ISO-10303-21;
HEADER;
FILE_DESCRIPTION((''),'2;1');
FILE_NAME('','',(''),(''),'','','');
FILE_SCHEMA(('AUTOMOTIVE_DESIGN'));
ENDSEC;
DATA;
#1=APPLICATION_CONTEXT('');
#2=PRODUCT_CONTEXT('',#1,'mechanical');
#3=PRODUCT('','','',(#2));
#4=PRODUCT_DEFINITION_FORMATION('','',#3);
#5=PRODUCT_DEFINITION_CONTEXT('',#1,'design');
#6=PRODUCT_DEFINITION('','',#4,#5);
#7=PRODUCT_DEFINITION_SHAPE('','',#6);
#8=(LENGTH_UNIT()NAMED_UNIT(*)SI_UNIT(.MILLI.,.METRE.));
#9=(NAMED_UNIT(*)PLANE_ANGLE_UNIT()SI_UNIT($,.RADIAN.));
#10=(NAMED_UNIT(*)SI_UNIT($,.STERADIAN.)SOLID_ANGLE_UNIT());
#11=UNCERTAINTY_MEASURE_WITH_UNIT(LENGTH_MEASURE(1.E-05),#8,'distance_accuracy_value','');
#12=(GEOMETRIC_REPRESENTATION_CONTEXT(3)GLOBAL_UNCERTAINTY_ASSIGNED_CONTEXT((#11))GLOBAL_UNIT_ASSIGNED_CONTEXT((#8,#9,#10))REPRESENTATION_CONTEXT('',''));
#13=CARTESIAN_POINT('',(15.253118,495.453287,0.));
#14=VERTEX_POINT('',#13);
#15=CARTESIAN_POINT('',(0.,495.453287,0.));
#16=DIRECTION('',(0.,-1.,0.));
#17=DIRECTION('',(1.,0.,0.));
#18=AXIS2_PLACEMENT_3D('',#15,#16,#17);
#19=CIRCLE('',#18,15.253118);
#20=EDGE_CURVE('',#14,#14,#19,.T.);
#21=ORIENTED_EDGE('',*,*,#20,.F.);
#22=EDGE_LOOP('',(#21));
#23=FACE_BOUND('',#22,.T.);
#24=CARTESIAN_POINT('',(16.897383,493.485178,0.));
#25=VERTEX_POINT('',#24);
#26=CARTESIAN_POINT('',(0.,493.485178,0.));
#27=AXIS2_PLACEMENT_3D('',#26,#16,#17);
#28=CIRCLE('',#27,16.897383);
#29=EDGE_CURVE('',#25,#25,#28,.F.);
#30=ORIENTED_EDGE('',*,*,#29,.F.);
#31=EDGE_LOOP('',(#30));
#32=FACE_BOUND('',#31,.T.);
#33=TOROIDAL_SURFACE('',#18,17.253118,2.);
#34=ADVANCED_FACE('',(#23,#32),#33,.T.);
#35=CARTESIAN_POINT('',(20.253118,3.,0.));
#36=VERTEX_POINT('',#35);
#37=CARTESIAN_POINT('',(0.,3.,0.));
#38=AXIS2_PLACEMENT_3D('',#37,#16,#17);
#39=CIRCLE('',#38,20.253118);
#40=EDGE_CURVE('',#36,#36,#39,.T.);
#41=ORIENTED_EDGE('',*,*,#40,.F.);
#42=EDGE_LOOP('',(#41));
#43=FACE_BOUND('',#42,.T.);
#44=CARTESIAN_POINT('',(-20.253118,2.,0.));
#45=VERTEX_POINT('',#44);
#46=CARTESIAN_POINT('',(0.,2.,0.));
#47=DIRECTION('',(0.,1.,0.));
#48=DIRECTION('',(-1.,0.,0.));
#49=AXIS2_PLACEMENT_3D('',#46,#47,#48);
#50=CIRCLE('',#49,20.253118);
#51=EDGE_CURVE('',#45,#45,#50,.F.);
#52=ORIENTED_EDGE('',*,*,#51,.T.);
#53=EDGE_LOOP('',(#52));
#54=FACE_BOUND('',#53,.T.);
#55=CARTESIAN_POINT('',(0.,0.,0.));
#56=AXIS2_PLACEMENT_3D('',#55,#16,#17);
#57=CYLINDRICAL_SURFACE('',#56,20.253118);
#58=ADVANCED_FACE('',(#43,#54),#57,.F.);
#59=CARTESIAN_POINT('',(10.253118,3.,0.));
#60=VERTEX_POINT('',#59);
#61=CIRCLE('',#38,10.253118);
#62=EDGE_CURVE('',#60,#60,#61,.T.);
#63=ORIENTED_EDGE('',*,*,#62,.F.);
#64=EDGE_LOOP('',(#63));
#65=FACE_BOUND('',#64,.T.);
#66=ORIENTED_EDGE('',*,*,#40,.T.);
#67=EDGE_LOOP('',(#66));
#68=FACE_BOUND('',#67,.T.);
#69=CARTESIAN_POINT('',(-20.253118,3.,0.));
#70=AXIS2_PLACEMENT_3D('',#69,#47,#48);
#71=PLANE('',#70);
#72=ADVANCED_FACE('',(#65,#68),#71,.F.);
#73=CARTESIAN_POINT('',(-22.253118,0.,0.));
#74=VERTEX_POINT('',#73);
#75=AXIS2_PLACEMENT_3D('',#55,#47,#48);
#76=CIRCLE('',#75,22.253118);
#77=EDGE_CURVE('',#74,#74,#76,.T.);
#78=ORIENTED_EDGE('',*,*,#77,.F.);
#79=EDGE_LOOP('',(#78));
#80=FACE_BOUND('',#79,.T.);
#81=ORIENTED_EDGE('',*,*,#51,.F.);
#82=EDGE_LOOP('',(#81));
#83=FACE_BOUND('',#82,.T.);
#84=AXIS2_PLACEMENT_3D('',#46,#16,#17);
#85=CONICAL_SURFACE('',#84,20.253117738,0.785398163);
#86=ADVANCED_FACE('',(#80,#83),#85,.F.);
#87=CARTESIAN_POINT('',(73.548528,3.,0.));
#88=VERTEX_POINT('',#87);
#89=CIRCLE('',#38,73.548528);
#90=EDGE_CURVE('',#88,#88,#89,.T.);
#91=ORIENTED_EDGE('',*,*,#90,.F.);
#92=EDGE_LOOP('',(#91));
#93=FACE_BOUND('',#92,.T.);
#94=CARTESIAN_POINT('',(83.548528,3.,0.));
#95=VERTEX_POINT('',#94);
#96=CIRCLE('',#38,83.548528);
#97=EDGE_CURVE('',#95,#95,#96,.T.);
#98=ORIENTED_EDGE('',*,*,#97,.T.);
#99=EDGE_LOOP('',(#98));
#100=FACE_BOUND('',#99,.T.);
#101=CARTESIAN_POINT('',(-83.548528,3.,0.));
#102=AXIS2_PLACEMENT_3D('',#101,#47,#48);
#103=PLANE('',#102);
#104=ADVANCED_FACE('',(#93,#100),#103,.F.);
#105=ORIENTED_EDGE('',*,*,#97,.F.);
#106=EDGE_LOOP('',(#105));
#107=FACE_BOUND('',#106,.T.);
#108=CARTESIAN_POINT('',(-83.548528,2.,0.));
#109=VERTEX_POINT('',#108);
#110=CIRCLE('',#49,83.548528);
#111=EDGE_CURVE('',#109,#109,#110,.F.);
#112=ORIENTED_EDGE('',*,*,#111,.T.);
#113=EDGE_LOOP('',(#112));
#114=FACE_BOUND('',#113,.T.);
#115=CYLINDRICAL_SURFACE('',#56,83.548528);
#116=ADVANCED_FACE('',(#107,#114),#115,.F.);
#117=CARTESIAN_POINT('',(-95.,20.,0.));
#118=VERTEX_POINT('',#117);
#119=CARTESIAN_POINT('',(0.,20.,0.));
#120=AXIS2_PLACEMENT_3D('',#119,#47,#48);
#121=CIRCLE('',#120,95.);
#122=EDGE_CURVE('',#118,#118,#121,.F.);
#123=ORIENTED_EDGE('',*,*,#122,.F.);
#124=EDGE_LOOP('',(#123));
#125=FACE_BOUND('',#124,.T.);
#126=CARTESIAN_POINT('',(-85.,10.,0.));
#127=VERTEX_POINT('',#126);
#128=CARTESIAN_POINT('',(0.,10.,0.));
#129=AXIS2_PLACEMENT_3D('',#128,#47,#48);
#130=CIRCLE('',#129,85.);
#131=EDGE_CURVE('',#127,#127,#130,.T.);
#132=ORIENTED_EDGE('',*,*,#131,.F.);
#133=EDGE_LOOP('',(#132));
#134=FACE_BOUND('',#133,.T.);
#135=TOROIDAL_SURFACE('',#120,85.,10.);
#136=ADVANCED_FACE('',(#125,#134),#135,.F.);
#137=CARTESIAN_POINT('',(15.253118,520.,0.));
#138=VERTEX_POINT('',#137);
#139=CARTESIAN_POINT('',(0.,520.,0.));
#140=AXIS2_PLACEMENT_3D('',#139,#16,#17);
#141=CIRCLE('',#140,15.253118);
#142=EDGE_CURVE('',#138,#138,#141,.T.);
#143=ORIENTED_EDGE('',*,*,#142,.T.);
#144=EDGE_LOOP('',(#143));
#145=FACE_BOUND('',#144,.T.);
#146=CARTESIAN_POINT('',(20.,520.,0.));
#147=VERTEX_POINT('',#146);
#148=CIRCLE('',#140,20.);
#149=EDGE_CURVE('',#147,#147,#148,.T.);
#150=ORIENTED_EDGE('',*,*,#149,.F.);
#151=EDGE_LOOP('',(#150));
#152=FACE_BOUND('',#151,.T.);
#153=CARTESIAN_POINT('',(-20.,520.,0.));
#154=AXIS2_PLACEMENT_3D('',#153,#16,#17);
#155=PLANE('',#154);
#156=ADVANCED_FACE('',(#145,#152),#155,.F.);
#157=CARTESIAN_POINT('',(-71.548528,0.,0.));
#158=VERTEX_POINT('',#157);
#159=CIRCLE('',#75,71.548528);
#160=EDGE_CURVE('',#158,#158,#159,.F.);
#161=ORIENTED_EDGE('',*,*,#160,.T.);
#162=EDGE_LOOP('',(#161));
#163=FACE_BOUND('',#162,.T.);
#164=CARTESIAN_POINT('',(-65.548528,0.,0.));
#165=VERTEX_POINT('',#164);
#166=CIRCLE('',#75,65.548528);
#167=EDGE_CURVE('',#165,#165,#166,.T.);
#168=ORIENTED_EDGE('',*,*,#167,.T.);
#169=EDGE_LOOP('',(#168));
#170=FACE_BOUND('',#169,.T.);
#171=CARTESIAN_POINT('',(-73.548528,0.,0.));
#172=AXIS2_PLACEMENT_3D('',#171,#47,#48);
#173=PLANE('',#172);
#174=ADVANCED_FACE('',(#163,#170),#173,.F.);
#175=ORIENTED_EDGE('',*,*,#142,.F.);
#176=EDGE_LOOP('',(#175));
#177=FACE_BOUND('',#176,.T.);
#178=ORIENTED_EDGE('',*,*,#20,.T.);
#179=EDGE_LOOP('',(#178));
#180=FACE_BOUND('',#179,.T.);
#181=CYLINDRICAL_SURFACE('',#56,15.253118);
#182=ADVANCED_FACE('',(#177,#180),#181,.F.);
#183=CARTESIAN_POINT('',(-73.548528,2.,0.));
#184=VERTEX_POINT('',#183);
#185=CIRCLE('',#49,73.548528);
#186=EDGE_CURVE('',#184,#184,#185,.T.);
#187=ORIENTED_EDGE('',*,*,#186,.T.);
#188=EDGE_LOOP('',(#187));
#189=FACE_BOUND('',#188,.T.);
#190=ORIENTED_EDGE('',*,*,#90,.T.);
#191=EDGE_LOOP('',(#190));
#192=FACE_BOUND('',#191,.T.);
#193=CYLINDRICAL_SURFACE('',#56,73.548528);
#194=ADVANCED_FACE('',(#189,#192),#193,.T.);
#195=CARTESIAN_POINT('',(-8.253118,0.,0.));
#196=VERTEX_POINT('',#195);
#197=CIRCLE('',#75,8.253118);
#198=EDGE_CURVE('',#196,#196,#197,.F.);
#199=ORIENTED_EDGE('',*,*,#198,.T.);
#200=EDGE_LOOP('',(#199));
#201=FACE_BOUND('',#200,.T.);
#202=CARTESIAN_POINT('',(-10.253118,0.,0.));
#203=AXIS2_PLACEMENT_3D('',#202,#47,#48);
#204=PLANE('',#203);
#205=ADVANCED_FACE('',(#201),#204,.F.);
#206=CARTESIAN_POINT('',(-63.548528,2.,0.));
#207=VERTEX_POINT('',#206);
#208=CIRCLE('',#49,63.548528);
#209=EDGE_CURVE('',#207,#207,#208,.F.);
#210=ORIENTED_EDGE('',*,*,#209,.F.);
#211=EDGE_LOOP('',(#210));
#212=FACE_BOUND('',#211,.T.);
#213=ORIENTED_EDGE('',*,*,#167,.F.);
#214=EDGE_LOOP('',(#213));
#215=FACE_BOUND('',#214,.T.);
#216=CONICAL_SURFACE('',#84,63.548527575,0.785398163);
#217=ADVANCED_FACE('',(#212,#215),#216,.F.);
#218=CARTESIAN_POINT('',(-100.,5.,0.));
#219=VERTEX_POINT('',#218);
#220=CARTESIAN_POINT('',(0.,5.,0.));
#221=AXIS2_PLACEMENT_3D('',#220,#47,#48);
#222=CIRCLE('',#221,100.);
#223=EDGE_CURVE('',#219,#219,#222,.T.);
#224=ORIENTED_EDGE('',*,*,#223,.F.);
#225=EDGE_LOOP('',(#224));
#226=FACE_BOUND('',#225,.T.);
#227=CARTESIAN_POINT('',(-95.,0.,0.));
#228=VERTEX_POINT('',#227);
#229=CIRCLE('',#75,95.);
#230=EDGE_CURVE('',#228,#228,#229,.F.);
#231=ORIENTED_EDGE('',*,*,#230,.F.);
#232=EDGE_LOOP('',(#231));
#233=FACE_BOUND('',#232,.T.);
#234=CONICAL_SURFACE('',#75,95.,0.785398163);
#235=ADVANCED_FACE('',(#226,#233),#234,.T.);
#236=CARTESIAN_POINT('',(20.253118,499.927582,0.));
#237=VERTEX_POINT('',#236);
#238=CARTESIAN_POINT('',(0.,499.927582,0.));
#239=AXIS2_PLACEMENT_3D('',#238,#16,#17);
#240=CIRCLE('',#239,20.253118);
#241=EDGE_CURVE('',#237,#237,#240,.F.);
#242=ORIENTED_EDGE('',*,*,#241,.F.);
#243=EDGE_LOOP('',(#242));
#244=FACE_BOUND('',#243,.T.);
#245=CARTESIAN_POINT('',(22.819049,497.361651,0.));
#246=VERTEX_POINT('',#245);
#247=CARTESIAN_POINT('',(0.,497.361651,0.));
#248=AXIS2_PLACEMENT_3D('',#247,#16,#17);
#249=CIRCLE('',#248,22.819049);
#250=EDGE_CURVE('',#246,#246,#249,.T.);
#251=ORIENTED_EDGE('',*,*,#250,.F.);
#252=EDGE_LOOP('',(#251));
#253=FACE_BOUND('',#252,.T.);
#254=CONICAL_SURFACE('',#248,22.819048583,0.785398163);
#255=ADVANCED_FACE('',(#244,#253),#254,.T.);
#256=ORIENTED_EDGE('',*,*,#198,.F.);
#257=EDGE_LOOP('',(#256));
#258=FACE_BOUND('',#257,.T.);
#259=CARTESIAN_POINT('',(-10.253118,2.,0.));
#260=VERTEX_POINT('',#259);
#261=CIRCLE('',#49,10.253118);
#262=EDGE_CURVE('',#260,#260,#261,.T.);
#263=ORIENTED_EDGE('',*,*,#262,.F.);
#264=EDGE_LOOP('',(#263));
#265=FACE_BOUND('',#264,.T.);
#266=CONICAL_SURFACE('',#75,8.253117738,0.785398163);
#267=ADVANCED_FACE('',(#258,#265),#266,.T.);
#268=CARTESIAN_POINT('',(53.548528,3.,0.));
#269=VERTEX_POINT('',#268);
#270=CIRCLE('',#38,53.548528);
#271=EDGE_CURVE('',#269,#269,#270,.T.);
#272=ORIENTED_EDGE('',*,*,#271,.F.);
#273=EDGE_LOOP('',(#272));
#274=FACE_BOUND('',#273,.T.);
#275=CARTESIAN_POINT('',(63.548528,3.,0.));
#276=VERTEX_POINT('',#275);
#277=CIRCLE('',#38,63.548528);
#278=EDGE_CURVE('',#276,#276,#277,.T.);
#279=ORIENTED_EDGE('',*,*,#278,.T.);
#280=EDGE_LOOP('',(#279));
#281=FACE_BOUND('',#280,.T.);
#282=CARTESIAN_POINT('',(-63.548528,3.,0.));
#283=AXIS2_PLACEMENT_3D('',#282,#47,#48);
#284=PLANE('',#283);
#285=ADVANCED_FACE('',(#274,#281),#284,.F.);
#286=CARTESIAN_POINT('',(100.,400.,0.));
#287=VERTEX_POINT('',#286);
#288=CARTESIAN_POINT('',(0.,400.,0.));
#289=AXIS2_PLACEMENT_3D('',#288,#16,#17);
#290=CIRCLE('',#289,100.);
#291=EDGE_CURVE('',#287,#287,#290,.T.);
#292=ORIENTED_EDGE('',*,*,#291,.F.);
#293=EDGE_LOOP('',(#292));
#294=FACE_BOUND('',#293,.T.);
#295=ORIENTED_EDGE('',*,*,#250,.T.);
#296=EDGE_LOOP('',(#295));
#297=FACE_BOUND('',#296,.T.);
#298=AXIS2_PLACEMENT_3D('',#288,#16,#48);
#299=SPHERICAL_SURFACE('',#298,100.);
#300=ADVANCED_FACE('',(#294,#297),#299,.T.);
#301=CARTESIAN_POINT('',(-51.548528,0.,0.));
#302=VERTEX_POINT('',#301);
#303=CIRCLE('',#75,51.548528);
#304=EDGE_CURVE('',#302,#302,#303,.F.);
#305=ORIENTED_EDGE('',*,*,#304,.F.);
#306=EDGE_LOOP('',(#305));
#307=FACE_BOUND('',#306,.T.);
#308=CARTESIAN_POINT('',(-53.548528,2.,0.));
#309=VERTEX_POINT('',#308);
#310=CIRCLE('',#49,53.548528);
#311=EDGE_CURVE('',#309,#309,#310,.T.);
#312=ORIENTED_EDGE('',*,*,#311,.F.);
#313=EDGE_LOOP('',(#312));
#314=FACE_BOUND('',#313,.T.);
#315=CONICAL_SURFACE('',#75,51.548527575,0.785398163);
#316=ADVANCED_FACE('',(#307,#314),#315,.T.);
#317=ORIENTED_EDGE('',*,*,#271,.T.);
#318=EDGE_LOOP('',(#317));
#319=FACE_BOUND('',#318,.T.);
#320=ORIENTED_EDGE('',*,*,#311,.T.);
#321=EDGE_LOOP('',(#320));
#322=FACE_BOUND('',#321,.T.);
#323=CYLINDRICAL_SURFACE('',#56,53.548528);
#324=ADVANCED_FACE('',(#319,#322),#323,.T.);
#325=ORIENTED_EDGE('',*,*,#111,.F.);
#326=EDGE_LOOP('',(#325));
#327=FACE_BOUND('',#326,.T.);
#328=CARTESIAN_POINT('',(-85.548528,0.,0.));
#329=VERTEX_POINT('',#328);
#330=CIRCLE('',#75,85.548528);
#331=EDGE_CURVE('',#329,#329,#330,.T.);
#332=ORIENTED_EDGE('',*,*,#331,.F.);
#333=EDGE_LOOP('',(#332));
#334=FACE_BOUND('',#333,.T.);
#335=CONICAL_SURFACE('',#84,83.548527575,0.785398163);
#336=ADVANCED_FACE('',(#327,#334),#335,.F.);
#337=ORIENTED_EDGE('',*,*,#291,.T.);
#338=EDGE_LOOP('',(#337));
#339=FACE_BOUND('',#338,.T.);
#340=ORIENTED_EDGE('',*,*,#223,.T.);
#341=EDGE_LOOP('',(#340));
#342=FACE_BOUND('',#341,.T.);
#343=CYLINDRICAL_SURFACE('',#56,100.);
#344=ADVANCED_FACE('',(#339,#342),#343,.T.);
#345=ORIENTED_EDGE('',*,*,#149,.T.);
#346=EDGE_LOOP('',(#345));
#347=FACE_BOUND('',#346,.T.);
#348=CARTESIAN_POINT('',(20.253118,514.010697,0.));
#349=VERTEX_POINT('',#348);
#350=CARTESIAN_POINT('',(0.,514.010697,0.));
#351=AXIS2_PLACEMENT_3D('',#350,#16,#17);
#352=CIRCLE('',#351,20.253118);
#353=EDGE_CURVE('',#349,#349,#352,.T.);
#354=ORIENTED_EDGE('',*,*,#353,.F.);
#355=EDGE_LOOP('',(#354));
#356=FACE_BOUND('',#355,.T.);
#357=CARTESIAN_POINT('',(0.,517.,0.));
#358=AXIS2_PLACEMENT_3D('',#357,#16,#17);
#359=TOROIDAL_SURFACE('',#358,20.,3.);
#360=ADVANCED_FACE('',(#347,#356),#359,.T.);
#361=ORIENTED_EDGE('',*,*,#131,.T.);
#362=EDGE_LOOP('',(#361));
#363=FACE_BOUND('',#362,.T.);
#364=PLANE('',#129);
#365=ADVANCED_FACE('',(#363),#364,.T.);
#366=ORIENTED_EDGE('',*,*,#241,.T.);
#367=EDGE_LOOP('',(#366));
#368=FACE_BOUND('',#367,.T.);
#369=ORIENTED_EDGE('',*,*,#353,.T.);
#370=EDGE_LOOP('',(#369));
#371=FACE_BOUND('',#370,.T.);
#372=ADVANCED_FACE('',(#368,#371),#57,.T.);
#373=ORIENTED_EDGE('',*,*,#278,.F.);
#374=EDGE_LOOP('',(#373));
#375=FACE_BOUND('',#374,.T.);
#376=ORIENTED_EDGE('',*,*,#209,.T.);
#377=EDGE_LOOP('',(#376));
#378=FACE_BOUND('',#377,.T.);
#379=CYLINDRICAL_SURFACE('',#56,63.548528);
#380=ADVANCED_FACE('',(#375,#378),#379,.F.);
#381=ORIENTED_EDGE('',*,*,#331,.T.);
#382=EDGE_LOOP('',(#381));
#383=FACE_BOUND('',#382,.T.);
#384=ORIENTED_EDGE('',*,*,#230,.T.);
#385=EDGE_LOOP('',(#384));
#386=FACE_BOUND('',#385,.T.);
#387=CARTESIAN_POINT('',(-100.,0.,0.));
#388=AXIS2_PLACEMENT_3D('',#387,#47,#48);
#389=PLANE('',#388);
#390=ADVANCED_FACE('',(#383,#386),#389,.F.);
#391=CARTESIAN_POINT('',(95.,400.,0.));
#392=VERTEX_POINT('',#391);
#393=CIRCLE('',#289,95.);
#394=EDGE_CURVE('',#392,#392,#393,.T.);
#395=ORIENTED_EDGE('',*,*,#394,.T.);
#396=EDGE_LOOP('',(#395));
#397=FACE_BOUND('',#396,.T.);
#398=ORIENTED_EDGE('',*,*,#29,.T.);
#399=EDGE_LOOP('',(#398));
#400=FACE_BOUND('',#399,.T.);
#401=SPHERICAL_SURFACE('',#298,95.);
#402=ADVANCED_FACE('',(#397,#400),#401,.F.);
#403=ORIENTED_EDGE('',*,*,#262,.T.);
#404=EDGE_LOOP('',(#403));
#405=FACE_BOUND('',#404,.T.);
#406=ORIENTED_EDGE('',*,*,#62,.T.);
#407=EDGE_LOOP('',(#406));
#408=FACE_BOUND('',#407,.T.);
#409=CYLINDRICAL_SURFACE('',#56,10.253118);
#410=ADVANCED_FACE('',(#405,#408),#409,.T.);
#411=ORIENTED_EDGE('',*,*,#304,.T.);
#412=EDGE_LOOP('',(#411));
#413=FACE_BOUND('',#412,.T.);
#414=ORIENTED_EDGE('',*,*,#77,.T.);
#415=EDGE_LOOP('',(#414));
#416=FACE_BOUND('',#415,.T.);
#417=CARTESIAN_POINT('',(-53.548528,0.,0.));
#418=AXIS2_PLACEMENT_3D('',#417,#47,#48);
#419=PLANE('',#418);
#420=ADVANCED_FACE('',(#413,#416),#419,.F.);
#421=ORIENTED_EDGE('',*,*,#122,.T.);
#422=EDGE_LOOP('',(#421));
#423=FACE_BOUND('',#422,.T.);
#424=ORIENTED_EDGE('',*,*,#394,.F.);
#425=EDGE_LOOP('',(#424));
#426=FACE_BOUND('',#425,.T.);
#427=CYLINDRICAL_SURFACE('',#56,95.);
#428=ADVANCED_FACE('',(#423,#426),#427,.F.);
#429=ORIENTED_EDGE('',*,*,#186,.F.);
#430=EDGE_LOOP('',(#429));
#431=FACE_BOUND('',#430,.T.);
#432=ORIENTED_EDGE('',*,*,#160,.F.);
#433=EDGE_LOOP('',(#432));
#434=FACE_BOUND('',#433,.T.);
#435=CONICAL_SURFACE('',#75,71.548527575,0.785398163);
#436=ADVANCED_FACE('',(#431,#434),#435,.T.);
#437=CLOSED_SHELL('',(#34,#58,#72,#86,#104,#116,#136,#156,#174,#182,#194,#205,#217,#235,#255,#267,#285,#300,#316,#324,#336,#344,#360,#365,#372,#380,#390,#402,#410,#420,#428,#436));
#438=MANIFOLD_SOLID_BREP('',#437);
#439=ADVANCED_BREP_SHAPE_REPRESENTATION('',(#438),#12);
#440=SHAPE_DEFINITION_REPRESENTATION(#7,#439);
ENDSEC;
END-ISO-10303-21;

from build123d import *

# Parameters (mm, degrees)
CHANFREIN1_SIZE    = 0.2
CHANFREIN2_SIZE    = 0.5
CHANFREIN3_SIZE    = 0.2
ESQUISSE2_R        = 10
BOSS_EXTRU_1_DEPTH = 0.5
CONG_1_R           = 1
CONG_2_R           = 0.2
ECHELLE1_SCALE     = 10


with BuildPart() as part:
    # Esquisse1 → Révolution1 (revolve)
    with BuildSketch(Plane.XY, mode=Mode.PRIVATE) as r_volution1_sk:
        with BuildLine():
            Line((0, 0), (0, 50))
            Line((0, 50), (0, 52))
            Line((0, 52), (-2, 52))
            ThreePointArc((-2, 52), (-2.299732451, 51.712667184), (-2.025311774, 51.401069717))
            Line((-2.025311774, 51.401069717), (-2.025311774, 49.792758152))
            ThreePointArc((-2.025311774, 49.792758152), (-7.754131729, 46.314542037), (-10, 40))
            Line((-10, 40), (-10, 0))
            Line((-10, 0), (-8.354852758, 0))
            Line((-8.354852758, 0), (-8.354852758, 0.3))
            Line((-8.354852758, 0.3), (-7.354852758, 0.3))
            Line((-7.354852758, 0.3), (-7.354852758, 0))
            Line((-7.354852758, 0), (-6.354852758, 0))
            Line((-6.354852758, 0), (-6.354852758, 0.3))
            Line((-6.354852758, 0.3), (-5.354852758, 0.3))
            Line((-5.354852758, 0.3), (-5.354852758, 0))
            Line((-5.354852758, 0), (-2.025311774, 0))
            Line((-2.025311774, 0), (-2.025311774, 0.3))
            Line((-2.025311774, 0.3), (-1.025311774, 0.3))
            Line((-1.025311774, 0.3), (-1.025311774, 0))
            Line((-1.025311774, 0), (0, 0))
        make_face()
    revolve(r_volution1_sk.sketch.rotate(Axis((0, 0, 0), (0, 1, 0)), 180), axis=Axis((0, 0, 0), (0, 1, 0)))

    # Chanfrein1
    chanfrein1_edges = [part.edges().sort_by_distance(p)[0] for p in [
        (-1.025311774, 0, 0),
        (-2.025311774, 0, 0),
        (-5.354852758, 0, 0),
        (-6.354852758, 0, 0),
        (-7.354852758, 0, 0),
        (-8.354852758, 0, 0),
    ]]
    chamfer(chanfrein1_edges, length=CHANFREIN1_SIZE)

    # Chanfrein2
    chanfrein2_edges = [part.edges().sort_by_distance(p)[0] for p in [
        (-10, 0, 0),
    ]]
    chamfer(chanfrein2_edges, length=CHANFREIN2_SIZE)

    # Coque2: read off the stored shape, not the designer's step
    # Coque2 outline → Coque2 (revolve, cut)
    with BuildSketch(Plane.XY):
        with BuildLine():
            Line((8.854852758, 0.8), (8.854852758, 0.5))
            Line((8.854852758, 0.5), (9.292893219, 0.5))
            Line((9.292893219, 0.5), (9.5, 0.707106781))
            Line((9.5, 0.707106781), (9.5, 39.999999997))
            ThreePointArc((9.5, 39.999999997), (7.236727916, 46.154654261), (1.525311771, 49.376749117))
            Line((1.525311771, 49.376749117), (1.525311774, 52))
            Line((1.525311774, 52), (0, 52))
            Line((0, 52), (0, 0.5))
            Line((0, 0.5), (0.525311774, 0.5))
            Line((0.525311774, 0.5), (0.525311774, 0.8))
            Line((0.525311774, 0.8), (2.525311774, 0.8))
            Line((2.525311774, 0.8), (2.525311774, 0.5))
            Line((2.525311774, 0.5), (4.854852758, 0.5))
            Line((4.854852758, 0.5), (4.854852758, 0.8))
            Line((4.854852758, 0.8), (8.854852758, 0.8))
        make_face()
    revolve(axis=Axis((0, 0, 0), (0, 1, 0)), mode=Mode.SUBTRACT)

    # Chanfrein3
    # the kernel refuses this chamfer: 0.25748488, 0.2 mm, written as the material it adds along each edge
    with BuildSketch(Plane(origin=(0, 49.792758152, 0), x_dir=(1, 0, 0), z_dir=(0, 0, 1))) as chanfrein3_piece_1:
        with BuildLine():
            Line((2.281904858, -0.056593084), (2.025311774, CHANFREIN3_SIZE))
            Line((2.025311774, CHANFREIN3_SIZE), (2.025311774, 0))
            ThreePointArc((2.025311774, 0), (2.158033883, -0.028389777), (2.281904858, -0.056593084))
        make_face()
    revolve(axis=Axis((0, 49.792758152, 0), (0, 1, 0)))

    # Esquisse2 → Boss.-Extru.1 (add)
    with BuildSketch(Plane(origin=(0, 0.5, 0), x_dir=(1, 0, 0), z_dir=(0, 1, 0))):
        Circle(ESQUISSE2_R)
    extrude(amount=BOSS_EXTRU_1_DEPTH)

    # Congé1
    cong_1_edges = [part.edges().sort_by_distance(p)[0] for p in [
        (-9.5, 1, 0),
    ]]
    fillet(cong_1_edges, radius=CONG_1_R)

    # Congé2
    cong_2_edges = [part.edges().sort_by_distance(p)[0] for p in [
        (-1.525311771, 49.376749117, 0),
    ]]
    fillet(cong_2_edges, radius=CONG_2_R)


with BuildPart() as part_1:
    # Echelle1: scaled about (0, 0, 0)
    add(part.part.scale(ECHELLE1_SCALE))


solid = part_1.part
